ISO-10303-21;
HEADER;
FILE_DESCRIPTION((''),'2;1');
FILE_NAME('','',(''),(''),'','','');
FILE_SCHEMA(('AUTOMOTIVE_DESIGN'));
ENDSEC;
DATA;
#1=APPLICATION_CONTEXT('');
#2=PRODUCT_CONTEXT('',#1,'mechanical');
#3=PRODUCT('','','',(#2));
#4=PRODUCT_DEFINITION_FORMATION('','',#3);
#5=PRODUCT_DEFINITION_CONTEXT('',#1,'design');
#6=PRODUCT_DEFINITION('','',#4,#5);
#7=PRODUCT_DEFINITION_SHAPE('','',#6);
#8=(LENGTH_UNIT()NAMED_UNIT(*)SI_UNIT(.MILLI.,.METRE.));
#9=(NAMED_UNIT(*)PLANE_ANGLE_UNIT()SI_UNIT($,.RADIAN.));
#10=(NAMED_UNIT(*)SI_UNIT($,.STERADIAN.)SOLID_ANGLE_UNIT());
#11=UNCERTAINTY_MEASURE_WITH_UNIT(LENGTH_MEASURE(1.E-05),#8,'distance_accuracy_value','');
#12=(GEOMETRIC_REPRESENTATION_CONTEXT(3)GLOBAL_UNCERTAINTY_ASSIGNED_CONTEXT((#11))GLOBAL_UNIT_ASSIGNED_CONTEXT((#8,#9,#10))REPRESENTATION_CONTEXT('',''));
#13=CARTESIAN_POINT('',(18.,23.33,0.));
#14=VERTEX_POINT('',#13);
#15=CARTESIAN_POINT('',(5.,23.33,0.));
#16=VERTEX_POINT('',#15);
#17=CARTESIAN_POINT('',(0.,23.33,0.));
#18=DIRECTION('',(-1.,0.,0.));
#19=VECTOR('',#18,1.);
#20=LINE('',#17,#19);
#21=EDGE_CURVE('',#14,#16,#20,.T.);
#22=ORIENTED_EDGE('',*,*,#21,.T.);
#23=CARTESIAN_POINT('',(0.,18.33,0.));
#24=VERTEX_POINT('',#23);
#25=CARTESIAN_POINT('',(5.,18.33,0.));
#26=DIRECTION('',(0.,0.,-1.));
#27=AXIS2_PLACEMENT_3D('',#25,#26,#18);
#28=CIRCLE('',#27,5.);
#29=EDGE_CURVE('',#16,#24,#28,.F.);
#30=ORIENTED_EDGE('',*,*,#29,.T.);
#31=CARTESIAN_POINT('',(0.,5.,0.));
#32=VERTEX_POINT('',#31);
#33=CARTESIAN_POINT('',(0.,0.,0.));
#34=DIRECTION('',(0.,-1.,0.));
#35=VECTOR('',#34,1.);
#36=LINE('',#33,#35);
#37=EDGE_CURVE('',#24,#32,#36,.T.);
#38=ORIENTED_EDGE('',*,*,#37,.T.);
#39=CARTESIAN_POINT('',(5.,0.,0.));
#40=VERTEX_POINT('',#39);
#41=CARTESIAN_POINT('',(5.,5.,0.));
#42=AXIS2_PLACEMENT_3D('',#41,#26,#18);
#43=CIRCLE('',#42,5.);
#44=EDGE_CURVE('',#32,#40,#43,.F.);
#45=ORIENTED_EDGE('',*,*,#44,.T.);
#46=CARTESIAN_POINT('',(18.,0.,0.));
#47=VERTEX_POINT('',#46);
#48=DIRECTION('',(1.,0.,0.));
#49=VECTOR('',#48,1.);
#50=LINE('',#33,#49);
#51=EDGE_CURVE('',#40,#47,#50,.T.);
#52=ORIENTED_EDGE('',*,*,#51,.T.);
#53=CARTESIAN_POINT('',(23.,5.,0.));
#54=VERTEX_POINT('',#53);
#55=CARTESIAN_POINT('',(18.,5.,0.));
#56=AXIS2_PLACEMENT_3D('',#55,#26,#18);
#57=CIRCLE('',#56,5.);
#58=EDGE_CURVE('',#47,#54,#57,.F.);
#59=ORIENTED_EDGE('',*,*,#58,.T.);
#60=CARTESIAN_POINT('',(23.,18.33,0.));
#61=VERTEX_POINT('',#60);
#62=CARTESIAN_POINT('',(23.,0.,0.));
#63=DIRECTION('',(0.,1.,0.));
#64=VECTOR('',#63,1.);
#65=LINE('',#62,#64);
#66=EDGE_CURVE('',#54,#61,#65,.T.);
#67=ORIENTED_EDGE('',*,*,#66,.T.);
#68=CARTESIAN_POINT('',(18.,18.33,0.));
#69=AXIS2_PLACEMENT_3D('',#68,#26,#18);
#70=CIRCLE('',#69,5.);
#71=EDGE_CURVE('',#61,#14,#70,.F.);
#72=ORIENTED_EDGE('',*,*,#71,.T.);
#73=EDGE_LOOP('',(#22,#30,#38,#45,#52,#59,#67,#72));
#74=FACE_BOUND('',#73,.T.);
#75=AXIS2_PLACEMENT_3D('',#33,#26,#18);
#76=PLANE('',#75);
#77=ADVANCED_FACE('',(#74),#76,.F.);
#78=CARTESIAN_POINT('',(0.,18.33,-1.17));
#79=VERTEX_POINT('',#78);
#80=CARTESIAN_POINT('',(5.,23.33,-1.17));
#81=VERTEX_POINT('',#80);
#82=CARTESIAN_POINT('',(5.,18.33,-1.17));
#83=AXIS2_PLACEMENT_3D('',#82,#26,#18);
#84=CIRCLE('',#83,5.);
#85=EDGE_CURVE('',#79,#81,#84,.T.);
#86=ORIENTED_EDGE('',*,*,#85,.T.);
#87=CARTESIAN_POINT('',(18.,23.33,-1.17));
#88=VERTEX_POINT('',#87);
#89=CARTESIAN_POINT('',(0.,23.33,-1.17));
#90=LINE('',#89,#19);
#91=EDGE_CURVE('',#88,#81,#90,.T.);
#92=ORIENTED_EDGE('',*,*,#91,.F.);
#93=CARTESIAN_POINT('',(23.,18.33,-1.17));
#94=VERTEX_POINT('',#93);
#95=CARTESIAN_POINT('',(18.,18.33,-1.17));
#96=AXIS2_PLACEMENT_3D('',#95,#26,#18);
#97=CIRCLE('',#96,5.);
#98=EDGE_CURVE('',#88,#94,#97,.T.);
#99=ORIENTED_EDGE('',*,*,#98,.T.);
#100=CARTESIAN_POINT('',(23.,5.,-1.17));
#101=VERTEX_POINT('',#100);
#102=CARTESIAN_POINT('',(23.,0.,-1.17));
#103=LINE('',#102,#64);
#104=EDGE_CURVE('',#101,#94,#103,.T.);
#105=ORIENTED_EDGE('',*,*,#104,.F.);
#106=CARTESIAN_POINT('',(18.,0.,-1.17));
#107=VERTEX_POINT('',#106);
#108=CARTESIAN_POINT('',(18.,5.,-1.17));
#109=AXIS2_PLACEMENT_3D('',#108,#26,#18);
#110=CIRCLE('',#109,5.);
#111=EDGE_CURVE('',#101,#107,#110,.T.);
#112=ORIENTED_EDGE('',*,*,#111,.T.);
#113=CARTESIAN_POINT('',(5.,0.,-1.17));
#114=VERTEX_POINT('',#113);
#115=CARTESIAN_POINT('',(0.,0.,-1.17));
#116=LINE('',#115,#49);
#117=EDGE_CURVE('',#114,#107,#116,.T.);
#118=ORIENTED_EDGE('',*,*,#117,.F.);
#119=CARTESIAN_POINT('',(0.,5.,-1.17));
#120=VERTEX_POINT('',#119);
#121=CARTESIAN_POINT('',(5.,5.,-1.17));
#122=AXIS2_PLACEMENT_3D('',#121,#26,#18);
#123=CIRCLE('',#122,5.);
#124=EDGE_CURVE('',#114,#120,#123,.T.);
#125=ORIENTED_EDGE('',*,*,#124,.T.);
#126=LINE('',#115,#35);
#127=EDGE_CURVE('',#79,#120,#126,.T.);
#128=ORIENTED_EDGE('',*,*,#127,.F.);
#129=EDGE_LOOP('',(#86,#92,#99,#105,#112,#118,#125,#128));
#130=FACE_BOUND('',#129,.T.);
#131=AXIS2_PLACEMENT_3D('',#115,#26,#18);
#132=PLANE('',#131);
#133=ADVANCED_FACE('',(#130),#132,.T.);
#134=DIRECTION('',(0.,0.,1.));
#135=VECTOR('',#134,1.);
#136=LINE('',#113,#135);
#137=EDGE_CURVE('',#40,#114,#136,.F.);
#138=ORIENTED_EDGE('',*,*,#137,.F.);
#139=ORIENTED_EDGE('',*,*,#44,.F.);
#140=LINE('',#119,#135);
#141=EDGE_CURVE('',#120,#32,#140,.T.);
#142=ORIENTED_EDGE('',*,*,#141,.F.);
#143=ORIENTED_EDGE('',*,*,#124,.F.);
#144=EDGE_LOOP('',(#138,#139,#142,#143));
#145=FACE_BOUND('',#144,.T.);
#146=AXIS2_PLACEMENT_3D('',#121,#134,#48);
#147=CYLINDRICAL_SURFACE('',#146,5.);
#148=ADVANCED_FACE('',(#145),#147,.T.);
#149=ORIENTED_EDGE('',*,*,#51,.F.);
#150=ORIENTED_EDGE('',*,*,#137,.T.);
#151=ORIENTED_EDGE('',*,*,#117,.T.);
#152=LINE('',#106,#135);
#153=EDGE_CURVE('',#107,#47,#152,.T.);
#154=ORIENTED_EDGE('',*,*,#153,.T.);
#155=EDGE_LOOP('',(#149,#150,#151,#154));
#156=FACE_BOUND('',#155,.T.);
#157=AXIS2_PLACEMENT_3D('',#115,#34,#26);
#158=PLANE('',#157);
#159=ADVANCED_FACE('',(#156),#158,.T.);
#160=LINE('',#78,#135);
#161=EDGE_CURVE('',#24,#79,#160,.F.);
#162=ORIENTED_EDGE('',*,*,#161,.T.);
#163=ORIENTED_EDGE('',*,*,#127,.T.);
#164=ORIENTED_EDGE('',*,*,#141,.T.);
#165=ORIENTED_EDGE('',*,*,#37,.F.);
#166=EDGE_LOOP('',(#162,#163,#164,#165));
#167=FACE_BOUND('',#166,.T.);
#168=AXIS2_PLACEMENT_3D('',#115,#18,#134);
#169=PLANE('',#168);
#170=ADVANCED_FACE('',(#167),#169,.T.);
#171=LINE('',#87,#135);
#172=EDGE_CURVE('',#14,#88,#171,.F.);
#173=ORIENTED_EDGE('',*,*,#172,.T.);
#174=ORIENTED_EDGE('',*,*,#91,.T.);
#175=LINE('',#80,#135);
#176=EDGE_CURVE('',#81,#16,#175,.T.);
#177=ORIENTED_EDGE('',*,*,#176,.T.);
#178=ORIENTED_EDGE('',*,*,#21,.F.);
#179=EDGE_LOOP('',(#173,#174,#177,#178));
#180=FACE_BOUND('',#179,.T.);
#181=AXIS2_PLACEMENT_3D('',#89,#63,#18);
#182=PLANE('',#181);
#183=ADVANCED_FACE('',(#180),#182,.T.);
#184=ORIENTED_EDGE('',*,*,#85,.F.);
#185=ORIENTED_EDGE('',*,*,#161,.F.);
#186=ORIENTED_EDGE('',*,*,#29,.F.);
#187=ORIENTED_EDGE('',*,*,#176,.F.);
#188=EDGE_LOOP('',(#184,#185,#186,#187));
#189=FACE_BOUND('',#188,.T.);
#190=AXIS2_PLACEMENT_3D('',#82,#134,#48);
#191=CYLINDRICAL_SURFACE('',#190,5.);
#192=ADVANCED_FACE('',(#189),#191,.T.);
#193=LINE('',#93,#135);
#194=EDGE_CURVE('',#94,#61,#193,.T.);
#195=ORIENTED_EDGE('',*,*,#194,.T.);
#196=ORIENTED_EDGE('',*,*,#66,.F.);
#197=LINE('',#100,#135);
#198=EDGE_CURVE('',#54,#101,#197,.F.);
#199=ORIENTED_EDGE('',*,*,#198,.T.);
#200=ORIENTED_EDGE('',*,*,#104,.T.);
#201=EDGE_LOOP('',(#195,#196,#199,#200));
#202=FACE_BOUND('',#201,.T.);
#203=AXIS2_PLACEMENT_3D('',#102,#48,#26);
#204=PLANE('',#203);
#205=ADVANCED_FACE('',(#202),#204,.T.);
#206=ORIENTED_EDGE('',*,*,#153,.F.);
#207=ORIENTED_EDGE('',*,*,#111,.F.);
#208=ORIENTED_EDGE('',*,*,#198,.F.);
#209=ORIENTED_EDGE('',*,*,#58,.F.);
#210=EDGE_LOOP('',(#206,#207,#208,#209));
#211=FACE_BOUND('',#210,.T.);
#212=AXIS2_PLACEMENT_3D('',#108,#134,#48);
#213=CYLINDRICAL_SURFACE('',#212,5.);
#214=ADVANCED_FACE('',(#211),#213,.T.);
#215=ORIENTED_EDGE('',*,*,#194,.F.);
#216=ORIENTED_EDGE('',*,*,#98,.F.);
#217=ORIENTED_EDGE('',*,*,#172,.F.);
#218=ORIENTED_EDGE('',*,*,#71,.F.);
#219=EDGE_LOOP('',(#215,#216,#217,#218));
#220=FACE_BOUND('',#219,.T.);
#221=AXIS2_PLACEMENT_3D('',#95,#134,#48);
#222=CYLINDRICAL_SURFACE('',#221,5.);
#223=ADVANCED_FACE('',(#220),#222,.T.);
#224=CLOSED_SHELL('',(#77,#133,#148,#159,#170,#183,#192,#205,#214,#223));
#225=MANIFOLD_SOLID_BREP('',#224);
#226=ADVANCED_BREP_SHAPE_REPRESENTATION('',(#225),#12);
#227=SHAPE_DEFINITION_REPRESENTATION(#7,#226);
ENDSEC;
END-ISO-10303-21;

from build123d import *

# Parameters (mm, degrees)
SKETCH2_W          = 23
SKETCH2_H          = 23.33
BASE_FLANGE1_DEPTH = 1.17
FILLET1_R          = 5


# Sheet-metal steps are written as plain solids
with BuildPart() as part:
    # Sketch2 → Base-Flange1 (new body)
    with BuildSketch(Plane.XY):
        with Locations((11.5, 11.665)):
            Rectangle(SKETCH2_W, SKETCH2_H)
    extrude(amount=-BASE_FLANGE1_DEPTH)

    # Fillet1
    fillet1_edges = [part.edges().sort_by_distance(p)[0] for p in [
        (0, 23.33, -0.585),
        (23, 23.33, -0.585),
        (23, 0, -0.585),
        (0, 0, -0.585),
    ]]
    fillet(fillet1_edges, radius=FILLET1_R)


solid = part.part
